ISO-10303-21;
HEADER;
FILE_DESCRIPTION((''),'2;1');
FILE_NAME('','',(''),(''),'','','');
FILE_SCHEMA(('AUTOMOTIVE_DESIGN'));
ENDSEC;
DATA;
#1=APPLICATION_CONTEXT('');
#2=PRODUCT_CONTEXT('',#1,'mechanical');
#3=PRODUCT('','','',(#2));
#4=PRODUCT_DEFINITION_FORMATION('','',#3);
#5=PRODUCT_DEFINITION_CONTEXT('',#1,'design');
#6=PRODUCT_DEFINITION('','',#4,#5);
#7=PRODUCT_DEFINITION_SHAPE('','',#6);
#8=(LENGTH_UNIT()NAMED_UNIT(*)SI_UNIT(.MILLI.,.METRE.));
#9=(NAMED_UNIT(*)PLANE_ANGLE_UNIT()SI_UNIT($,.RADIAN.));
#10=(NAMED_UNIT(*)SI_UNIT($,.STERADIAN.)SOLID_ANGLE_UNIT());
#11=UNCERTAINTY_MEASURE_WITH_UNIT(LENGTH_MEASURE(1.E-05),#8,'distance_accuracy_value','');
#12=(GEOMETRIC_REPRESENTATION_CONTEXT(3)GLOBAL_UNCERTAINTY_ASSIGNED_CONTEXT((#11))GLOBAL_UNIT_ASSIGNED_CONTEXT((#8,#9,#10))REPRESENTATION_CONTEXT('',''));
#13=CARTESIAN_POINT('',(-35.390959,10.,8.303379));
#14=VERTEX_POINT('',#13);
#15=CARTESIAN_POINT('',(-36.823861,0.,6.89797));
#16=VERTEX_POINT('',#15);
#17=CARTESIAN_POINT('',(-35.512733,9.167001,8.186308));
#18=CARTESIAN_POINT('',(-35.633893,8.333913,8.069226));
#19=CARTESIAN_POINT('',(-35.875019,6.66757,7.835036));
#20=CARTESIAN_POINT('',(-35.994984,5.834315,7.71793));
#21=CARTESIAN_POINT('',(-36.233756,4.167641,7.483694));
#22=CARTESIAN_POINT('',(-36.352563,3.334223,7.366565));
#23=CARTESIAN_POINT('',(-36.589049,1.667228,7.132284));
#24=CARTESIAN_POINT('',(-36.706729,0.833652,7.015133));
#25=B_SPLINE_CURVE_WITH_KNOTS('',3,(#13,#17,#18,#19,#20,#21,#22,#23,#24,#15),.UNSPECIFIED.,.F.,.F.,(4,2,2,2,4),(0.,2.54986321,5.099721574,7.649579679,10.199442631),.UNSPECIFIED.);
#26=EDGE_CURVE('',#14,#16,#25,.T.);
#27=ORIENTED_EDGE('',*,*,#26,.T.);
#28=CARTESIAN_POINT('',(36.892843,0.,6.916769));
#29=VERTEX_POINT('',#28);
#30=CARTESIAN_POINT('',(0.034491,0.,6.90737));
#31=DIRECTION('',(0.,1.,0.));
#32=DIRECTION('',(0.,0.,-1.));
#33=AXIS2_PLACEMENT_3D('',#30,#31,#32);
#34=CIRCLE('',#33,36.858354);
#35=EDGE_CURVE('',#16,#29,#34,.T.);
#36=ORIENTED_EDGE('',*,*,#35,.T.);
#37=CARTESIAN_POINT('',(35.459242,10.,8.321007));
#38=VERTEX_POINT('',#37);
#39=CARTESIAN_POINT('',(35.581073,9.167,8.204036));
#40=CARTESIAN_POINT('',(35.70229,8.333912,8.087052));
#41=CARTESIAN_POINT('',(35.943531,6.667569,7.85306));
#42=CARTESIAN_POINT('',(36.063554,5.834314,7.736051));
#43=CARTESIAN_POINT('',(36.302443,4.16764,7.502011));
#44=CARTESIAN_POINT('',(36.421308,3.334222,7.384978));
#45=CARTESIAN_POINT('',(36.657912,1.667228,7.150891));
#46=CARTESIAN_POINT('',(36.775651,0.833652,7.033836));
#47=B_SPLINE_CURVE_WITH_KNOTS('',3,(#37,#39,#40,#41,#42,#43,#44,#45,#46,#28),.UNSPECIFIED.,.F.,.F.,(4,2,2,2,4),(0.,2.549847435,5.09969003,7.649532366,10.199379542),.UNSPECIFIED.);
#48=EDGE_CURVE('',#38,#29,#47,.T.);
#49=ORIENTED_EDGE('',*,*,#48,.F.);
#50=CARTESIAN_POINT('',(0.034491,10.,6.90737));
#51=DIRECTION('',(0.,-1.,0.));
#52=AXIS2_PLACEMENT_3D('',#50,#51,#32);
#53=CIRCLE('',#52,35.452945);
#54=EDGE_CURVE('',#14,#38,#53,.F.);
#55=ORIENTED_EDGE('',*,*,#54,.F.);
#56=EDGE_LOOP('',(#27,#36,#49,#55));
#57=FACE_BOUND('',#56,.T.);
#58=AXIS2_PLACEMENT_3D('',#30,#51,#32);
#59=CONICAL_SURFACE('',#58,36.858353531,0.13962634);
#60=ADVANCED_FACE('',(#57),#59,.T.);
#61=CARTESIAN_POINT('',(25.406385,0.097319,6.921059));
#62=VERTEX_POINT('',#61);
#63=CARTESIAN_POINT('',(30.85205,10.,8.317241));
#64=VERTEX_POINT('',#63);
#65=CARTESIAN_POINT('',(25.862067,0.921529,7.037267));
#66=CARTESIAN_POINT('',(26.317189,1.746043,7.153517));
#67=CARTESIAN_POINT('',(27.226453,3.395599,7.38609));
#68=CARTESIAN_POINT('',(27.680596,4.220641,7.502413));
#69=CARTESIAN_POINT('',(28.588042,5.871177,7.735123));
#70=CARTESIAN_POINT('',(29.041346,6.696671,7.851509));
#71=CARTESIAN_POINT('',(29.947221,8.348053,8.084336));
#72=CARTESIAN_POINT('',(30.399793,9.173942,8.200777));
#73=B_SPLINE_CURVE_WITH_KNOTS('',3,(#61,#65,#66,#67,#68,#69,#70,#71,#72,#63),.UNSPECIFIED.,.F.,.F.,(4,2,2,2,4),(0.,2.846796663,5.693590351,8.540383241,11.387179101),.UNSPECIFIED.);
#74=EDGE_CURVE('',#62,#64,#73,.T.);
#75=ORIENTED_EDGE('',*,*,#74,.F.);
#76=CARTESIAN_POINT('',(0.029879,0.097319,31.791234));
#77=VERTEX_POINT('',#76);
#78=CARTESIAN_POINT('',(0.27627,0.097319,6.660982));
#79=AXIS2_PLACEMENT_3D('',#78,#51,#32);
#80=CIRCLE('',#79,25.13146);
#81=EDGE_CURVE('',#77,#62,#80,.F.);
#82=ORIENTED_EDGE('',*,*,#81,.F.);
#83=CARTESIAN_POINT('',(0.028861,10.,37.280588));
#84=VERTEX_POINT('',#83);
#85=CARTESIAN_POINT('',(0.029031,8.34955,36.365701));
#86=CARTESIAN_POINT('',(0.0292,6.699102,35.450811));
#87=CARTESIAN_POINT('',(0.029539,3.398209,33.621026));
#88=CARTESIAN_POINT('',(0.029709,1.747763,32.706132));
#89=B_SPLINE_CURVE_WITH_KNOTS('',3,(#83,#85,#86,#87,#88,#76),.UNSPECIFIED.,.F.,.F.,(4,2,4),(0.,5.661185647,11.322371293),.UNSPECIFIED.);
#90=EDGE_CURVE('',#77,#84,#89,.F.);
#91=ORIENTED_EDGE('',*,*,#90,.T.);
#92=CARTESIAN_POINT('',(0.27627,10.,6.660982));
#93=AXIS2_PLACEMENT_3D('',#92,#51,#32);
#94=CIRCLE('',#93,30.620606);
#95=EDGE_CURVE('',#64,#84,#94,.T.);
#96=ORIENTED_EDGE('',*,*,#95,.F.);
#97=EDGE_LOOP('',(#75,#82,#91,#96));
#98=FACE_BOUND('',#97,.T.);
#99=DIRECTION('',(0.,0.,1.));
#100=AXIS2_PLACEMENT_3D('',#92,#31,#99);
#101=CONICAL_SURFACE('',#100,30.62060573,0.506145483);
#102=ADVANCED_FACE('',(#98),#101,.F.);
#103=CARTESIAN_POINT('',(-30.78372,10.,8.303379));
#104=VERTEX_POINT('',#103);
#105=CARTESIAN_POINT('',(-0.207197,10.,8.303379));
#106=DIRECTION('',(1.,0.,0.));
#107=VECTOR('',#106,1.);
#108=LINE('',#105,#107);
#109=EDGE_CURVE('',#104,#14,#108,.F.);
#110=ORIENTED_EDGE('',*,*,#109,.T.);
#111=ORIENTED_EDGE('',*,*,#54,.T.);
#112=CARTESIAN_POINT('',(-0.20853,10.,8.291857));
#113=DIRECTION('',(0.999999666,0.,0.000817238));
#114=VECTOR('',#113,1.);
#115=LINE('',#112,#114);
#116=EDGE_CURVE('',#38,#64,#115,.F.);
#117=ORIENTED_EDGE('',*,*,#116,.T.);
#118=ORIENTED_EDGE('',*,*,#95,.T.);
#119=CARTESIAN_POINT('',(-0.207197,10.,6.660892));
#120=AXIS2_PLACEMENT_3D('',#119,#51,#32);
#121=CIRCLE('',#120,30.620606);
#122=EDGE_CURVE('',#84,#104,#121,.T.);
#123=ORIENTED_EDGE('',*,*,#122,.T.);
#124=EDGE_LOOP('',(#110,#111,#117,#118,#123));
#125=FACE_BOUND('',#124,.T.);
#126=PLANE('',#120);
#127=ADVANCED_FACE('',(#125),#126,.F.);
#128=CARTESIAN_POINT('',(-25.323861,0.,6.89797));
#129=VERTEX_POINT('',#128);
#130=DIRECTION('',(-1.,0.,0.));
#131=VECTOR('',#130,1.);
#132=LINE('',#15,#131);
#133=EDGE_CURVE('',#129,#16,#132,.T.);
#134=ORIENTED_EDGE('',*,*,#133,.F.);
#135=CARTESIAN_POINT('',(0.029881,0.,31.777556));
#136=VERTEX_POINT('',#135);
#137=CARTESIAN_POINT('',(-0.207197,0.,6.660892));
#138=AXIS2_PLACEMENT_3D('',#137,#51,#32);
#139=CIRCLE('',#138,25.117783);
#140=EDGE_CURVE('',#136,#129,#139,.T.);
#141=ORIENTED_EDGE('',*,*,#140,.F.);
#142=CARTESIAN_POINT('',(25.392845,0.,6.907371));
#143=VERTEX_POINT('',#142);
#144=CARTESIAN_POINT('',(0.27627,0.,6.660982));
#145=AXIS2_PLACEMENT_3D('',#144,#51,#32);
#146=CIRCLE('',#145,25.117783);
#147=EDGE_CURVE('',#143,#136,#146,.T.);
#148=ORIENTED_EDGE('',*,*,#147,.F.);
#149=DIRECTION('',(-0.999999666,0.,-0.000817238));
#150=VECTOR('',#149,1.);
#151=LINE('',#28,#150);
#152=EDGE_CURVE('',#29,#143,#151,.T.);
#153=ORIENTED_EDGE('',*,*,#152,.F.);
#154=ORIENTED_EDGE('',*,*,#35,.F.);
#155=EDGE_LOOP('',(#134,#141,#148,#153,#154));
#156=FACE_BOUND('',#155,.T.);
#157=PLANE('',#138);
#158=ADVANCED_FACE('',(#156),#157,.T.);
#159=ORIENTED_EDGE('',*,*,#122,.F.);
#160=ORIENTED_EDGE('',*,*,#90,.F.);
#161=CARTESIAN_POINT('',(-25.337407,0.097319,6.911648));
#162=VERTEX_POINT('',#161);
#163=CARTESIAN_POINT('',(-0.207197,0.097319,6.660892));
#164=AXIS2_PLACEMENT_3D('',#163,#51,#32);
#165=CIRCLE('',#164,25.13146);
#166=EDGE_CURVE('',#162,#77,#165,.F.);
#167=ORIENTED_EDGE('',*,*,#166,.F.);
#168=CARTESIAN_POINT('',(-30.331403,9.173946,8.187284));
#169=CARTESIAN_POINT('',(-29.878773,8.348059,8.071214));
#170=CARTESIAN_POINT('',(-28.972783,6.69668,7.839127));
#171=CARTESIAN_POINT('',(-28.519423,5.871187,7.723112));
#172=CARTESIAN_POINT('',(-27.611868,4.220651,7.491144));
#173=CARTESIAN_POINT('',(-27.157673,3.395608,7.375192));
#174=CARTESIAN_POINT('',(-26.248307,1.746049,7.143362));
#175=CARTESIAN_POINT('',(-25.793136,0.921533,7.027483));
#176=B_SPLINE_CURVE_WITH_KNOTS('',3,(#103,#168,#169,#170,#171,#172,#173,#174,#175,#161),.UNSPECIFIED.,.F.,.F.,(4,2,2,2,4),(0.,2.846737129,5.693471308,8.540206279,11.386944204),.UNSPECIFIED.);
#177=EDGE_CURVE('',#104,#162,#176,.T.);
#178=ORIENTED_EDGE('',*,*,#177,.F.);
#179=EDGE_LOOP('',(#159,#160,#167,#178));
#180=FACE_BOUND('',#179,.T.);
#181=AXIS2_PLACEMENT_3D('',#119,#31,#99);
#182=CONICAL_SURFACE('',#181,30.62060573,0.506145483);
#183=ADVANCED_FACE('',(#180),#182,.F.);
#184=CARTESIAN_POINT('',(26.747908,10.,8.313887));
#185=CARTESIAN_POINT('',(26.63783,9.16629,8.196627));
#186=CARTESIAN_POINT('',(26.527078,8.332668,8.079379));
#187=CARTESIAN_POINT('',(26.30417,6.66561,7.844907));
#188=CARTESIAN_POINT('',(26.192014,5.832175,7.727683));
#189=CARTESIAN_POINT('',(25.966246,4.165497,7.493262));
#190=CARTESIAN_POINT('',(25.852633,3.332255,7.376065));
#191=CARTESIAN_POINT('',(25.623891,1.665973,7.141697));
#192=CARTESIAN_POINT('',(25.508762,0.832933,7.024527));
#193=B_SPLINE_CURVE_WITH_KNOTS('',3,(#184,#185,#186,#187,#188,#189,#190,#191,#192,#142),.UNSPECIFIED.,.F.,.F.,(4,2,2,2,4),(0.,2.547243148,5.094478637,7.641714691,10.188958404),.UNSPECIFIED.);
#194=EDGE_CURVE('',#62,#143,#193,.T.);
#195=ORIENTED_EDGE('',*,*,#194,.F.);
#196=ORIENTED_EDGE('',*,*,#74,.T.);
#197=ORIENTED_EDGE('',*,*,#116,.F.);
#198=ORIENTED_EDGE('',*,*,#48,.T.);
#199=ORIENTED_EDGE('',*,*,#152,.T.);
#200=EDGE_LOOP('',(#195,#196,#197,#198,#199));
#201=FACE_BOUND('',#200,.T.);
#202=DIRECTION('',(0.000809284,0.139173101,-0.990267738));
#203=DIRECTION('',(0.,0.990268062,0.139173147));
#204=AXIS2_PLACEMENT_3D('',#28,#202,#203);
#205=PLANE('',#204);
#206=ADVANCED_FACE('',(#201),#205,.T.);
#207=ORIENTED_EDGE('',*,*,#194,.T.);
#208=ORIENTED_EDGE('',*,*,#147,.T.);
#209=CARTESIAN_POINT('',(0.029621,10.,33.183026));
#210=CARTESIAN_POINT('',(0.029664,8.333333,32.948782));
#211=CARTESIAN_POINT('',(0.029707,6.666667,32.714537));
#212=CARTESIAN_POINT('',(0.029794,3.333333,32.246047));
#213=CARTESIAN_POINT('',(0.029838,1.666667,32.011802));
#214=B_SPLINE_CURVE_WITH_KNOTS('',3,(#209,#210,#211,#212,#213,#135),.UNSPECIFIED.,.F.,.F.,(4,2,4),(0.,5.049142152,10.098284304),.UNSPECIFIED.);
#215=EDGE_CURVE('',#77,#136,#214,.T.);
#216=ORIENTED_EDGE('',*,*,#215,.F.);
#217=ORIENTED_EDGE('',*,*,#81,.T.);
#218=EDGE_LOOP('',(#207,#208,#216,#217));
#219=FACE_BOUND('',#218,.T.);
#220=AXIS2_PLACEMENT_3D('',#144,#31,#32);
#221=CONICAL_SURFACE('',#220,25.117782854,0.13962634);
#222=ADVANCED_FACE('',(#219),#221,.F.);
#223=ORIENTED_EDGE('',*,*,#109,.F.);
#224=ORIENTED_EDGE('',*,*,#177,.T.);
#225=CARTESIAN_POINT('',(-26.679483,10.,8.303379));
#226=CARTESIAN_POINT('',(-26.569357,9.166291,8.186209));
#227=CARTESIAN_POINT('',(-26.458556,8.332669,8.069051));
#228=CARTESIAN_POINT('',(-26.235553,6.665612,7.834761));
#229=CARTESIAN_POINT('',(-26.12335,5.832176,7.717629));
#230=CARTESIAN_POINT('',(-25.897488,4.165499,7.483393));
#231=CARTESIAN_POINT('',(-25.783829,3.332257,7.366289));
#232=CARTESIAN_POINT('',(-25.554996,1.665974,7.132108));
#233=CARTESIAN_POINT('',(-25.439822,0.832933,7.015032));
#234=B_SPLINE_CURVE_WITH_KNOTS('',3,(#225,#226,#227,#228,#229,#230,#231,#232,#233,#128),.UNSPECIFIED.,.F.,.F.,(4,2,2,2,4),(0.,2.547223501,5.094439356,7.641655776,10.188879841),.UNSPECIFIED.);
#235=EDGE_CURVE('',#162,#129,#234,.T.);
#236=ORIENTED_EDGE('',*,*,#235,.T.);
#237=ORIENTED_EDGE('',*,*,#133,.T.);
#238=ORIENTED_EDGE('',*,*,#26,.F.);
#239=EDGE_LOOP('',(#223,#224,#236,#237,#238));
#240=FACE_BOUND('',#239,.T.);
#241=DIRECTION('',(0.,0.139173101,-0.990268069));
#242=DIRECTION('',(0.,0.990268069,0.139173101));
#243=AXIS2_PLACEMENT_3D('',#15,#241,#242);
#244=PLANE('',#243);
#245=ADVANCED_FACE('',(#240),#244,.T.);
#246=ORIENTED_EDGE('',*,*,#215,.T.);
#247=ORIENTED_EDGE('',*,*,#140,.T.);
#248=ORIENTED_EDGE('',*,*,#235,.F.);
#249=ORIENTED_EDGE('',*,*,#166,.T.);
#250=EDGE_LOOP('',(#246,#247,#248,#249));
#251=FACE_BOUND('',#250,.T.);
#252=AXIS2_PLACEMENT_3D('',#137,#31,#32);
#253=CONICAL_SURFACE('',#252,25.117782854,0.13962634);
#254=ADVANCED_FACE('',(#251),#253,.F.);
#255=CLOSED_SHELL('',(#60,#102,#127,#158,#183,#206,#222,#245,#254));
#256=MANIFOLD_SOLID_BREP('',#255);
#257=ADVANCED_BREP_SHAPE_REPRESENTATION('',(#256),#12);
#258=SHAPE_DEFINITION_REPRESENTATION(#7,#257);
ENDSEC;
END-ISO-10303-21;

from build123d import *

# Parameters (mm, degrees)
BOSS_EXTRUDE1_DEPTH = 10
BOSS_EXTRUDE1_DRAFT = 8


with BuildPart() as part:
    # Sketch1 → Boss-Extrude1 (with draft: the straight prism first)
    with BuildSketch(Plane(origin=(0, 0, 0), x_dir=(1, 0, 0), z_dir=(0, 1, 0))):
        with BuildLine():
            Line((36.892843318, -6.916769299), (25.392844844, -6.907371064))
            ThreePointArc((25.392844844, -6.907371064), (17.862146893, -24.595305322), (0.029881046, -31.777555993))
            ThreePointArc((0.029881046, -31.777555993), (-17.799721033, -24.588695191), (-25.323861346, -6.897970432))
            Line((-25.323861346, -6.897970432), (-36.823861346, -6.897970432))
            ThreePointArc((-36.823861346, -6.897970432), (0.025091553, -43.765722197), (36.892843318, -6.916769299))
        make_face()
    extrude(amount=BOSS_EXTRUDE1_DEPTH)
    # Boss-Extrude1: the draft: its side faces are tilted about the plane it starts from
    boss_extrude1_sides = [part.faces().sort_by_distance(p)[0] for p in [
        (31.142844081, 5, 6.912070181),
        (17.862146893, 5, 24.595305322),
        (-17.799721033, 5, 24.588695191),
        (-31.073861346, 5, 6.897970432),
        (0.025091553, 5, 43.765722197),
    ]]
    draft(boss_extrude1_sides, Plane(origin=(0, 0, 0), x_dir=(1, 0, 0), z_dir=(0, 1, 0)), BOSS_EXTRUDE1_DRAFT)

    # Chamfer3: read off the stored shape, not the designer's step
    # Chamfer3 outline → Chamfer3 (revolve, cut)
    with BuildSketch(Plane(origin=(-0.207197369, 0, 6.660892016), x_dir=(1, 0, 0), z_dir=(0, 0, 1))):
        Polygon((25.131460191, 10), (25.131460191, 0.097319313), (30.62060573, 10), align=None)
    revolve(axis=Axis((-0.207197369, 0, 6.660892016), (0, 1, 0)), mode=Mode.SUBTRACT)

    # Chamfer3 2 outline → Chamfer3 2 (revolve, cut)
    with BuildSketch(Plane(origin=(0.27627048, 0, 6.66098163), x_dir=(1, 0, 0), z_dir=(0, 0, 1))):
        Polygon((25.295653078, 1.265612408), (25.131460191, 0.097319313), (30.62060573, 10), (25.295653078, 10), align=None)
    revolve(axis=Axis((0.27627048, 0, 6.66098163), (0, 1, 0)), mode=Mode.SUBTRACT)


solid = part.part
